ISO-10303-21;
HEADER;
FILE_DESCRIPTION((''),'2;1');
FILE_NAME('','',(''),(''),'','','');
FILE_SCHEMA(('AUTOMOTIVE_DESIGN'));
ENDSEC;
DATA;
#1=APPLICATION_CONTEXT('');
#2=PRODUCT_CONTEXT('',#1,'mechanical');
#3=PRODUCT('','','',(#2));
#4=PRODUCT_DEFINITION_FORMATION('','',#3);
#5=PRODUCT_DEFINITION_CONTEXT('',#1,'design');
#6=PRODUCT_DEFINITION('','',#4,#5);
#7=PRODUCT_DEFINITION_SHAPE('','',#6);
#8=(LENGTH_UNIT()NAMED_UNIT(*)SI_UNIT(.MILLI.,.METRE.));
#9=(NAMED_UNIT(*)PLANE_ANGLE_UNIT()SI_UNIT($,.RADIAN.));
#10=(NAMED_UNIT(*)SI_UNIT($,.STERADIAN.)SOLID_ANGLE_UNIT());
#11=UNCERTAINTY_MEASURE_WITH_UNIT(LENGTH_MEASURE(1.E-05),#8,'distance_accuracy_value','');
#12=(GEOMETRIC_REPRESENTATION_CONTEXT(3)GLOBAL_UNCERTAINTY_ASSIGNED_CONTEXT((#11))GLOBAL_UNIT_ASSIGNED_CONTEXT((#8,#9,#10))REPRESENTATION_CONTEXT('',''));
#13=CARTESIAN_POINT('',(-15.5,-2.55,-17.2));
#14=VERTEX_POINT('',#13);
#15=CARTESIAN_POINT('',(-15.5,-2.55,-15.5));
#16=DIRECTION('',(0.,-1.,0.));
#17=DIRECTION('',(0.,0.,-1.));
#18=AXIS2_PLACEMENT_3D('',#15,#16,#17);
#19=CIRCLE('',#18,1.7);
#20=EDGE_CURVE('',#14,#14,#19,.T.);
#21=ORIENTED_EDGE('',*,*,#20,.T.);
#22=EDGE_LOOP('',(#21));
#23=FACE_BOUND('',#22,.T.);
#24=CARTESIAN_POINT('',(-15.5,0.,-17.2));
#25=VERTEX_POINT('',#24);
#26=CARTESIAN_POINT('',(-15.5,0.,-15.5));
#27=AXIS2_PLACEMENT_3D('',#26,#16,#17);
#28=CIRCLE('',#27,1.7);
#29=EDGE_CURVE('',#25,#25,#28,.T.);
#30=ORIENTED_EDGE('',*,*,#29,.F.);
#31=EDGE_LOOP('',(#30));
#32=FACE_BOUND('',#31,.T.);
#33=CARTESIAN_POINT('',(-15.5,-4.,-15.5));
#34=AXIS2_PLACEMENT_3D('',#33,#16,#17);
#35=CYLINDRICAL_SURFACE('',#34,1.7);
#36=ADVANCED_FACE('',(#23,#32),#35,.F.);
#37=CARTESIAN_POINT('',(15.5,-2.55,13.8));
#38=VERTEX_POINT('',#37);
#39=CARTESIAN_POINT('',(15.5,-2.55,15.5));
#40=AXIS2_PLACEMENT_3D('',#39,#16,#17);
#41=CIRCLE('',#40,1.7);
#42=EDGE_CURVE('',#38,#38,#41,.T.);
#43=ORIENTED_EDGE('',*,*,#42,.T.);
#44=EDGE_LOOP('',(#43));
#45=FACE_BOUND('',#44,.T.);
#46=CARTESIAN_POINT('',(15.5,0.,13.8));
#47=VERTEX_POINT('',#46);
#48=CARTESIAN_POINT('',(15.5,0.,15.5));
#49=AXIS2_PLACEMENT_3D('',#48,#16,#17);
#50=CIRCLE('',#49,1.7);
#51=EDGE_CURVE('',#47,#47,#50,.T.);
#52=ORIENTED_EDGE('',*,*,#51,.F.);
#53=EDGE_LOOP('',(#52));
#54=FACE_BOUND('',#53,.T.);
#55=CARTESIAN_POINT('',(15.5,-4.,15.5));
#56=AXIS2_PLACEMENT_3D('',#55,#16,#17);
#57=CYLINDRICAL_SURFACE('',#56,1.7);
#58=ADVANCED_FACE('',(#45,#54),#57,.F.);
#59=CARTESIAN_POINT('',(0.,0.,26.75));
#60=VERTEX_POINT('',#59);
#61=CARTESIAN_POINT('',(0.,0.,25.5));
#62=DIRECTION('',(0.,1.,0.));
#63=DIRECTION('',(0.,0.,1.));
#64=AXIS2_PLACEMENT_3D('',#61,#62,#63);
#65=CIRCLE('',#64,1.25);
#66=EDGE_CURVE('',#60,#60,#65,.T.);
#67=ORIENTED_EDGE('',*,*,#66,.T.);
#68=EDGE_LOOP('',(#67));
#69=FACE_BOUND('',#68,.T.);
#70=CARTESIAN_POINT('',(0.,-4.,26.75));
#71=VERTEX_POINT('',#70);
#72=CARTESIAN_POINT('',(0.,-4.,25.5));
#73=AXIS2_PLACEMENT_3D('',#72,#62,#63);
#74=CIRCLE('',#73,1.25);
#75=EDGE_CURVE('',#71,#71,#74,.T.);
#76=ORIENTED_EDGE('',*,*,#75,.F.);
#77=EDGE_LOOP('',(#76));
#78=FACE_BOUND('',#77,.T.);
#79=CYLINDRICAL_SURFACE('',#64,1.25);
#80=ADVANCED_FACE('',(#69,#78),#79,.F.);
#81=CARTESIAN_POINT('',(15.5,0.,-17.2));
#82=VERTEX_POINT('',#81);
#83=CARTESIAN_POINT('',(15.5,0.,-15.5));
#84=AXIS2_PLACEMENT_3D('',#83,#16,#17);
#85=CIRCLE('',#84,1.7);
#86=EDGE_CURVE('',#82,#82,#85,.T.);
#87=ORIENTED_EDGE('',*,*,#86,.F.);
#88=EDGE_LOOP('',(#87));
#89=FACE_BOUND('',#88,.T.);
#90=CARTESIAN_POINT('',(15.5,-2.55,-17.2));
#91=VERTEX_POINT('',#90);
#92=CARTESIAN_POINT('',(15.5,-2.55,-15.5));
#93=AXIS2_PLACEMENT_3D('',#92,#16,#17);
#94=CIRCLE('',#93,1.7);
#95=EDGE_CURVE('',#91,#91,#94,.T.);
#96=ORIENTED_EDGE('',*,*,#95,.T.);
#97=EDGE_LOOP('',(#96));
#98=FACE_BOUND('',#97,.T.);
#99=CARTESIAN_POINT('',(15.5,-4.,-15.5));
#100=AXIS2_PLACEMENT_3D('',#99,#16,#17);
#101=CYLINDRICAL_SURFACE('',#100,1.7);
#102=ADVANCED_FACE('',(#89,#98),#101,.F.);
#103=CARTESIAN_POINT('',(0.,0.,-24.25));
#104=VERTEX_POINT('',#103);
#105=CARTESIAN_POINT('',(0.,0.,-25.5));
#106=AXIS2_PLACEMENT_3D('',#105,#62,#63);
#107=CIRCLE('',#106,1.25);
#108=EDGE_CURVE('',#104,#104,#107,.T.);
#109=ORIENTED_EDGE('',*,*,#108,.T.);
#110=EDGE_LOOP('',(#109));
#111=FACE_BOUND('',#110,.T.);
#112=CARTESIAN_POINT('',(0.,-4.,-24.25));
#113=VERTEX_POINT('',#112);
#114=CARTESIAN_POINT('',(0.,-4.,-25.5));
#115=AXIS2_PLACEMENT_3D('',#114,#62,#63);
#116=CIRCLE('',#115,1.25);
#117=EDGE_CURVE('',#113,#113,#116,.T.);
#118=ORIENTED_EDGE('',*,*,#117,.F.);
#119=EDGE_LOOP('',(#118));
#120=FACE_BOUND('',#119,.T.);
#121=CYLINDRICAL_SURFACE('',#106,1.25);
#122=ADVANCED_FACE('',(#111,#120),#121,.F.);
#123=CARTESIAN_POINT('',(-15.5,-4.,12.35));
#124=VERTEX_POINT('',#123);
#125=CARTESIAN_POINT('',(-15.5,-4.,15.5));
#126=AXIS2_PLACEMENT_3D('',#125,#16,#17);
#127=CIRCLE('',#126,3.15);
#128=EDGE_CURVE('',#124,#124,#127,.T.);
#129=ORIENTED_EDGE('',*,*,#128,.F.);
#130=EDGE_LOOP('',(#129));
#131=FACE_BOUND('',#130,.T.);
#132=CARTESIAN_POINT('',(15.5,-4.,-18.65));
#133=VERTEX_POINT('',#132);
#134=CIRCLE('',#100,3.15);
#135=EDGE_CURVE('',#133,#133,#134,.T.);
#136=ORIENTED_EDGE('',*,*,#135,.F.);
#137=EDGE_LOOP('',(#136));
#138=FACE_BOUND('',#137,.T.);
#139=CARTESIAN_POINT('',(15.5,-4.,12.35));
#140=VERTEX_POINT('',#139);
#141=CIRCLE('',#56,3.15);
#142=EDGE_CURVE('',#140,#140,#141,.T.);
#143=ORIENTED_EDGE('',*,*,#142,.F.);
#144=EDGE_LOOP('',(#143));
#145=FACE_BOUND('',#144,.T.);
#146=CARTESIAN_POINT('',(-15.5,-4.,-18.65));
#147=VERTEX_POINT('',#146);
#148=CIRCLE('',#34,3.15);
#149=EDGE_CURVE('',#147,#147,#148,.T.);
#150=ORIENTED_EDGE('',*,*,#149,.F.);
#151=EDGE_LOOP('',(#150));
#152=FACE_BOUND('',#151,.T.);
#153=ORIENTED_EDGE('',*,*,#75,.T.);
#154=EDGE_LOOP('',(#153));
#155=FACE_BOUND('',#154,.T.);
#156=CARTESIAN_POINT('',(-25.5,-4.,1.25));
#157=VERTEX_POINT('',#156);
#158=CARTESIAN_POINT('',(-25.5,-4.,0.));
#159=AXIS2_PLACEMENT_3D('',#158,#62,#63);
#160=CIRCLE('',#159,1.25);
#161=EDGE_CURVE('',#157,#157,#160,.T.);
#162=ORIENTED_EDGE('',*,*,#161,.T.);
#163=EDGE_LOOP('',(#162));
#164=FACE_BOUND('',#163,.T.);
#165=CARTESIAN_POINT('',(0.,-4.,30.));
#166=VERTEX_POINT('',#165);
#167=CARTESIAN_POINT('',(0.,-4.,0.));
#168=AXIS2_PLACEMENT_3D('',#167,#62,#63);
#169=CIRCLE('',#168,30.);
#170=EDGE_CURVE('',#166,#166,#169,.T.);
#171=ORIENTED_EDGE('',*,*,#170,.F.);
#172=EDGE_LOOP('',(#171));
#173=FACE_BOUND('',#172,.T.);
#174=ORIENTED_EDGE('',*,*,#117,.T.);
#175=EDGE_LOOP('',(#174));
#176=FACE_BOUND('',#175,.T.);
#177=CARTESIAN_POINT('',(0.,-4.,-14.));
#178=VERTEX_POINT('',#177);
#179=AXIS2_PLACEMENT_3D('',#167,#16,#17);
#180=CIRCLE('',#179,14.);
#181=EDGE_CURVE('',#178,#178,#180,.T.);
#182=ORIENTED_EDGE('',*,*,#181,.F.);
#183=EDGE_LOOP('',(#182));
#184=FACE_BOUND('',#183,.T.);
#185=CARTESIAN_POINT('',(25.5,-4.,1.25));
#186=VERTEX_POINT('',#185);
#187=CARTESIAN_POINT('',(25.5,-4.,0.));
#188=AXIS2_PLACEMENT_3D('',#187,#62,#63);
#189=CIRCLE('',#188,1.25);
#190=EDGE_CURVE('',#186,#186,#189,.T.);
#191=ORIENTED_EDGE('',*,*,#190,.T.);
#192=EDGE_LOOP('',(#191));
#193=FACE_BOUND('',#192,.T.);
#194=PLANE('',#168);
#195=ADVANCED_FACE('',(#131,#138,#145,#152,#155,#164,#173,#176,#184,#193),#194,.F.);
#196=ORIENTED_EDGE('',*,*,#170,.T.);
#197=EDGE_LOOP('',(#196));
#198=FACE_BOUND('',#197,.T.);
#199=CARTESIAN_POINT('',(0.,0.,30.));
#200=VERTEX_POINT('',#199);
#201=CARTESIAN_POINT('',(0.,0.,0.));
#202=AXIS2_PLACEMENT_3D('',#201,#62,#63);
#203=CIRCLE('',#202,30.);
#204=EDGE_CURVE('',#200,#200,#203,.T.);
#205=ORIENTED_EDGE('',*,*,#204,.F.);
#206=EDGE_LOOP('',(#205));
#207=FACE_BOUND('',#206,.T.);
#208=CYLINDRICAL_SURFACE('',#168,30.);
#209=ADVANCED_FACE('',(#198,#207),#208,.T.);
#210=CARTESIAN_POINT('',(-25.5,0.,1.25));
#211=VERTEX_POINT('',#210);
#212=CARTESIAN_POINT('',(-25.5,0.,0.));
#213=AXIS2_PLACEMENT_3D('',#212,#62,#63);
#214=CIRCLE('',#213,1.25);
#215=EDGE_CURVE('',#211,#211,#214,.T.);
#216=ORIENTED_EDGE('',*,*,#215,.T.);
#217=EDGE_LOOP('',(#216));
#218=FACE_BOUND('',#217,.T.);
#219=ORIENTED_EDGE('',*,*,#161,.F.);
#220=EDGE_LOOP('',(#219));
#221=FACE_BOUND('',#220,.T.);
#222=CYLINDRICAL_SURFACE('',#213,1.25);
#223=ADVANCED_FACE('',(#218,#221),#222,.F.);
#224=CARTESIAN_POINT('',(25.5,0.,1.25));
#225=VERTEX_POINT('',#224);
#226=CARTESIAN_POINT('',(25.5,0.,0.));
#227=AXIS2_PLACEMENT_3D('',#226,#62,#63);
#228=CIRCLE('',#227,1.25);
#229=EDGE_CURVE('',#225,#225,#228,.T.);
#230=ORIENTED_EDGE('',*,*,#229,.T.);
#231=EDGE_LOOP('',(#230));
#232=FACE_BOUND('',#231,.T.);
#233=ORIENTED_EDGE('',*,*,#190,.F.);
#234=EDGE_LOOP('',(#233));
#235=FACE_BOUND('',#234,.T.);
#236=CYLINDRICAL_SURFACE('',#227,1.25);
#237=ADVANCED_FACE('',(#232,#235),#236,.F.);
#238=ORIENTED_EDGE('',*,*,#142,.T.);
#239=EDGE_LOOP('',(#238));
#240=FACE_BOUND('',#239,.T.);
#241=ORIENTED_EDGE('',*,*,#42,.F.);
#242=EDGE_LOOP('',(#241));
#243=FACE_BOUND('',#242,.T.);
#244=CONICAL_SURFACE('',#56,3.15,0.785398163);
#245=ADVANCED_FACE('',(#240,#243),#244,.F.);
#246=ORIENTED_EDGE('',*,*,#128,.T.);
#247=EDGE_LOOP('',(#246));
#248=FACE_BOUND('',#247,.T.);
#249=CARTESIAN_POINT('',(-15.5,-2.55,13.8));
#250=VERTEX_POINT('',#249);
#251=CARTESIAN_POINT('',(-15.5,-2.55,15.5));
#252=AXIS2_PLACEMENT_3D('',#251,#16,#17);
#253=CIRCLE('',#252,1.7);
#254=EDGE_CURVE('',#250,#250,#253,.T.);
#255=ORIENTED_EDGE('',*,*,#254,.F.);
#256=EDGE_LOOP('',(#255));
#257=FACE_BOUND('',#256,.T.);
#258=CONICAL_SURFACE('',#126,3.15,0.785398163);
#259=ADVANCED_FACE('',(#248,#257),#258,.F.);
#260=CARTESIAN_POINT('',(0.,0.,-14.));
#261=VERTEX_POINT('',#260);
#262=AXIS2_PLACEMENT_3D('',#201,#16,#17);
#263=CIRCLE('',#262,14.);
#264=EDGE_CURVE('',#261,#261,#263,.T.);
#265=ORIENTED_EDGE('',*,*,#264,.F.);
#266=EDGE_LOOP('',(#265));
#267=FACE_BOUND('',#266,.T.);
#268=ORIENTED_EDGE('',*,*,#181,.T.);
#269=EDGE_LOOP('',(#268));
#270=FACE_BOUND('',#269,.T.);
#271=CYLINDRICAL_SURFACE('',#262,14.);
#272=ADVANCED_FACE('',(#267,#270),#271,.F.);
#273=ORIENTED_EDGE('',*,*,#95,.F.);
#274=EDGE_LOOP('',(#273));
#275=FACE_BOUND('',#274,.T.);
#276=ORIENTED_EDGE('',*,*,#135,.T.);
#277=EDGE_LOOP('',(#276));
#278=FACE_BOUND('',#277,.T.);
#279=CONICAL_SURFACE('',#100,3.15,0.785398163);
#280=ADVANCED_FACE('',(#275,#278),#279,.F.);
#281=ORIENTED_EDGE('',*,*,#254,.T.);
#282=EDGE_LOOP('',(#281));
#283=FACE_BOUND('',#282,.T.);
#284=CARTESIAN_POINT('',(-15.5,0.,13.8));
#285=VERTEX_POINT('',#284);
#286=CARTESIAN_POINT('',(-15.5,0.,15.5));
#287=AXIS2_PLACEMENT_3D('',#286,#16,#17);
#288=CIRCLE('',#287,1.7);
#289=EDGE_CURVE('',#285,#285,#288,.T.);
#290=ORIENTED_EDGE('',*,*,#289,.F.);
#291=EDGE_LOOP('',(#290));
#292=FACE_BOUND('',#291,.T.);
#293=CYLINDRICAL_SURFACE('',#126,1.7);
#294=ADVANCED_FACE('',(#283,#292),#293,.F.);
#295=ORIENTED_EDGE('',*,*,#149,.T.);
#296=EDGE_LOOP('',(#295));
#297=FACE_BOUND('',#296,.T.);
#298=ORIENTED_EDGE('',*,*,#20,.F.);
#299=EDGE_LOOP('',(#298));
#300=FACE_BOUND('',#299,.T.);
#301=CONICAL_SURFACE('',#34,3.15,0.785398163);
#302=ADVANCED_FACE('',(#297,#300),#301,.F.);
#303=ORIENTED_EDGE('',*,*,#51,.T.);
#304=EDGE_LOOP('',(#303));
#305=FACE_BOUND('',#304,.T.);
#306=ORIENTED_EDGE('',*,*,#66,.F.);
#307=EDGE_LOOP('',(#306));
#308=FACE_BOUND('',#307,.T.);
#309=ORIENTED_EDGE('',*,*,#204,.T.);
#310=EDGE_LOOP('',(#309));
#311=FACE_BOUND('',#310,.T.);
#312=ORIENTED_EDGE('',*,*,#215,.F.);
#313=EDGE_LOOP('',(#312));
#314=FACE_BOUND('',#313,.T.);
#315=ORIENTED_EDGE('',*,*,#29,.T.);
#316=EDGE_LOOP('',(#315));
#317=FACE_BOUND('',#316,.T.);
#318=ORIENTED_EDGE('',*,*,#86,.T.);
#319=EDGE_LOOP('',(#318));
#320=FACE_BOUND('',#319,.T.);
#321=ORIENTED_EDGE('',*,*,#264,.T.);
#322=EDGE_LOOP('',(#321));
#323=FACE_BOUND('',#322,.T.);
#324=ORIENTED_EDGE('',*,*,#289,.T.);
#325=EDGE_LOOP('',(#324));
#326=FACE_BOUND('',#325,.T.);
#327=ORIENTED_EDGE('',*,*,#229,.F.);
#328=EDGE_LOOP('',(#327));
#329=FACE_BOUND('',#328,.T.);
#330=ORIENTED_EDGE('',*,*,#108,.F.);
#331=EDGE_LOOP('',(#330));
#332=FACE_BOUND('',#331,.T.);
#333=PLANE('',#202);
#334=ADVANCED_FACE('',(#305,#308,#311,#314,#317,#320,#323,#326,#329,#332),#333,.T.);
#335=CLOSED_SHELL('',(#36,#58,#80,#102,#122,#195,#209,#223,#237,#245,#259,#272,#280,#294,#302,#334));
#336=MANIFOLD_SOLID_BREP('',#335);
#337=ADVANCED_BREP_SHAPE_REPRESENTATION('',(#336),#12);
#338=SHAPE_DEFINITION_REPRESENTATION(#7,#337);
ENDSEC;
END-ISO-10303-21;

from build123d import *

# Parameters (mm, degrees)
SKETCH1_R                   = 30
BASE_FLANGE1_DEPTH          = 4
M3_TAPPED_BASE_D            = 2.5
M3_TAPPED_MOTOR_D           = 3.4
M3_TAPPED_MOTOR_CSINK_D     = 6.3
M3_TAPPED_MOTOR_CSINK_ANGLE = 90
SKETCH10_R                  = 14
CUT_EXTRUDE1_DEPTH          = 43.614551505


# Sheet-metal steps are written as plain solids
with BuildPart() as part:
    # Sketch1 → Base-Flange1 (new body)
    with BuildSketch(Plane(origin=(0, 0, 0), x_dir=(1, 0, 0), z_dir=(0, 1, 0))):
        with Locations(Location((0, 0, 0), (0, 0, 270))):
            Circle(SKETCH1_R)
    extrude(amount=-BASE_FLANGE1_DEPTH)

    # M3 Tapped base (through all)
    with Locations(Plane(origin=(0, 0, 0), x_dir=(1, 0, 0), z_dir=(0, 1, 0))):
        with Locations((0, 25.5), (25.5, 0), (0, -25.5), (-25.5, 0)):
            Hole(M3_TAPPED_BASE_D / 2)

    # M3 Tapped motor (through all)
    with Locations(Plane.XZ.offset(4)):
        with Locations((-15.5, -15.5), (15.5, 15.5), (-15.5, 15.5), (15.5, -15.5)):
            CounterSinkHole(M3_TAPPED_MOTOR_D / 2, M3_TAPPED_MOTOR_CSINK_D / 2, counter_sink_angle=M3_TAPPED_MOTOR_CSINK_ANGLE)

    # Sketch10 → Cut-Extrude1 (cut, through all)
    with BuildSketch(Plane(origin=(0, -4, 0), x_dir=(-1, 0, 0), z_dir=(0, -1, 0))):
        with Locations(Location((0, 0, 0), (0, 0, 90))):
            Circle(SKETCH10_R)
    extrude(amount=-CUT_EXTRUDE1_DEPTH, mode=Mode.SUBTRACT)


solid = part.part
